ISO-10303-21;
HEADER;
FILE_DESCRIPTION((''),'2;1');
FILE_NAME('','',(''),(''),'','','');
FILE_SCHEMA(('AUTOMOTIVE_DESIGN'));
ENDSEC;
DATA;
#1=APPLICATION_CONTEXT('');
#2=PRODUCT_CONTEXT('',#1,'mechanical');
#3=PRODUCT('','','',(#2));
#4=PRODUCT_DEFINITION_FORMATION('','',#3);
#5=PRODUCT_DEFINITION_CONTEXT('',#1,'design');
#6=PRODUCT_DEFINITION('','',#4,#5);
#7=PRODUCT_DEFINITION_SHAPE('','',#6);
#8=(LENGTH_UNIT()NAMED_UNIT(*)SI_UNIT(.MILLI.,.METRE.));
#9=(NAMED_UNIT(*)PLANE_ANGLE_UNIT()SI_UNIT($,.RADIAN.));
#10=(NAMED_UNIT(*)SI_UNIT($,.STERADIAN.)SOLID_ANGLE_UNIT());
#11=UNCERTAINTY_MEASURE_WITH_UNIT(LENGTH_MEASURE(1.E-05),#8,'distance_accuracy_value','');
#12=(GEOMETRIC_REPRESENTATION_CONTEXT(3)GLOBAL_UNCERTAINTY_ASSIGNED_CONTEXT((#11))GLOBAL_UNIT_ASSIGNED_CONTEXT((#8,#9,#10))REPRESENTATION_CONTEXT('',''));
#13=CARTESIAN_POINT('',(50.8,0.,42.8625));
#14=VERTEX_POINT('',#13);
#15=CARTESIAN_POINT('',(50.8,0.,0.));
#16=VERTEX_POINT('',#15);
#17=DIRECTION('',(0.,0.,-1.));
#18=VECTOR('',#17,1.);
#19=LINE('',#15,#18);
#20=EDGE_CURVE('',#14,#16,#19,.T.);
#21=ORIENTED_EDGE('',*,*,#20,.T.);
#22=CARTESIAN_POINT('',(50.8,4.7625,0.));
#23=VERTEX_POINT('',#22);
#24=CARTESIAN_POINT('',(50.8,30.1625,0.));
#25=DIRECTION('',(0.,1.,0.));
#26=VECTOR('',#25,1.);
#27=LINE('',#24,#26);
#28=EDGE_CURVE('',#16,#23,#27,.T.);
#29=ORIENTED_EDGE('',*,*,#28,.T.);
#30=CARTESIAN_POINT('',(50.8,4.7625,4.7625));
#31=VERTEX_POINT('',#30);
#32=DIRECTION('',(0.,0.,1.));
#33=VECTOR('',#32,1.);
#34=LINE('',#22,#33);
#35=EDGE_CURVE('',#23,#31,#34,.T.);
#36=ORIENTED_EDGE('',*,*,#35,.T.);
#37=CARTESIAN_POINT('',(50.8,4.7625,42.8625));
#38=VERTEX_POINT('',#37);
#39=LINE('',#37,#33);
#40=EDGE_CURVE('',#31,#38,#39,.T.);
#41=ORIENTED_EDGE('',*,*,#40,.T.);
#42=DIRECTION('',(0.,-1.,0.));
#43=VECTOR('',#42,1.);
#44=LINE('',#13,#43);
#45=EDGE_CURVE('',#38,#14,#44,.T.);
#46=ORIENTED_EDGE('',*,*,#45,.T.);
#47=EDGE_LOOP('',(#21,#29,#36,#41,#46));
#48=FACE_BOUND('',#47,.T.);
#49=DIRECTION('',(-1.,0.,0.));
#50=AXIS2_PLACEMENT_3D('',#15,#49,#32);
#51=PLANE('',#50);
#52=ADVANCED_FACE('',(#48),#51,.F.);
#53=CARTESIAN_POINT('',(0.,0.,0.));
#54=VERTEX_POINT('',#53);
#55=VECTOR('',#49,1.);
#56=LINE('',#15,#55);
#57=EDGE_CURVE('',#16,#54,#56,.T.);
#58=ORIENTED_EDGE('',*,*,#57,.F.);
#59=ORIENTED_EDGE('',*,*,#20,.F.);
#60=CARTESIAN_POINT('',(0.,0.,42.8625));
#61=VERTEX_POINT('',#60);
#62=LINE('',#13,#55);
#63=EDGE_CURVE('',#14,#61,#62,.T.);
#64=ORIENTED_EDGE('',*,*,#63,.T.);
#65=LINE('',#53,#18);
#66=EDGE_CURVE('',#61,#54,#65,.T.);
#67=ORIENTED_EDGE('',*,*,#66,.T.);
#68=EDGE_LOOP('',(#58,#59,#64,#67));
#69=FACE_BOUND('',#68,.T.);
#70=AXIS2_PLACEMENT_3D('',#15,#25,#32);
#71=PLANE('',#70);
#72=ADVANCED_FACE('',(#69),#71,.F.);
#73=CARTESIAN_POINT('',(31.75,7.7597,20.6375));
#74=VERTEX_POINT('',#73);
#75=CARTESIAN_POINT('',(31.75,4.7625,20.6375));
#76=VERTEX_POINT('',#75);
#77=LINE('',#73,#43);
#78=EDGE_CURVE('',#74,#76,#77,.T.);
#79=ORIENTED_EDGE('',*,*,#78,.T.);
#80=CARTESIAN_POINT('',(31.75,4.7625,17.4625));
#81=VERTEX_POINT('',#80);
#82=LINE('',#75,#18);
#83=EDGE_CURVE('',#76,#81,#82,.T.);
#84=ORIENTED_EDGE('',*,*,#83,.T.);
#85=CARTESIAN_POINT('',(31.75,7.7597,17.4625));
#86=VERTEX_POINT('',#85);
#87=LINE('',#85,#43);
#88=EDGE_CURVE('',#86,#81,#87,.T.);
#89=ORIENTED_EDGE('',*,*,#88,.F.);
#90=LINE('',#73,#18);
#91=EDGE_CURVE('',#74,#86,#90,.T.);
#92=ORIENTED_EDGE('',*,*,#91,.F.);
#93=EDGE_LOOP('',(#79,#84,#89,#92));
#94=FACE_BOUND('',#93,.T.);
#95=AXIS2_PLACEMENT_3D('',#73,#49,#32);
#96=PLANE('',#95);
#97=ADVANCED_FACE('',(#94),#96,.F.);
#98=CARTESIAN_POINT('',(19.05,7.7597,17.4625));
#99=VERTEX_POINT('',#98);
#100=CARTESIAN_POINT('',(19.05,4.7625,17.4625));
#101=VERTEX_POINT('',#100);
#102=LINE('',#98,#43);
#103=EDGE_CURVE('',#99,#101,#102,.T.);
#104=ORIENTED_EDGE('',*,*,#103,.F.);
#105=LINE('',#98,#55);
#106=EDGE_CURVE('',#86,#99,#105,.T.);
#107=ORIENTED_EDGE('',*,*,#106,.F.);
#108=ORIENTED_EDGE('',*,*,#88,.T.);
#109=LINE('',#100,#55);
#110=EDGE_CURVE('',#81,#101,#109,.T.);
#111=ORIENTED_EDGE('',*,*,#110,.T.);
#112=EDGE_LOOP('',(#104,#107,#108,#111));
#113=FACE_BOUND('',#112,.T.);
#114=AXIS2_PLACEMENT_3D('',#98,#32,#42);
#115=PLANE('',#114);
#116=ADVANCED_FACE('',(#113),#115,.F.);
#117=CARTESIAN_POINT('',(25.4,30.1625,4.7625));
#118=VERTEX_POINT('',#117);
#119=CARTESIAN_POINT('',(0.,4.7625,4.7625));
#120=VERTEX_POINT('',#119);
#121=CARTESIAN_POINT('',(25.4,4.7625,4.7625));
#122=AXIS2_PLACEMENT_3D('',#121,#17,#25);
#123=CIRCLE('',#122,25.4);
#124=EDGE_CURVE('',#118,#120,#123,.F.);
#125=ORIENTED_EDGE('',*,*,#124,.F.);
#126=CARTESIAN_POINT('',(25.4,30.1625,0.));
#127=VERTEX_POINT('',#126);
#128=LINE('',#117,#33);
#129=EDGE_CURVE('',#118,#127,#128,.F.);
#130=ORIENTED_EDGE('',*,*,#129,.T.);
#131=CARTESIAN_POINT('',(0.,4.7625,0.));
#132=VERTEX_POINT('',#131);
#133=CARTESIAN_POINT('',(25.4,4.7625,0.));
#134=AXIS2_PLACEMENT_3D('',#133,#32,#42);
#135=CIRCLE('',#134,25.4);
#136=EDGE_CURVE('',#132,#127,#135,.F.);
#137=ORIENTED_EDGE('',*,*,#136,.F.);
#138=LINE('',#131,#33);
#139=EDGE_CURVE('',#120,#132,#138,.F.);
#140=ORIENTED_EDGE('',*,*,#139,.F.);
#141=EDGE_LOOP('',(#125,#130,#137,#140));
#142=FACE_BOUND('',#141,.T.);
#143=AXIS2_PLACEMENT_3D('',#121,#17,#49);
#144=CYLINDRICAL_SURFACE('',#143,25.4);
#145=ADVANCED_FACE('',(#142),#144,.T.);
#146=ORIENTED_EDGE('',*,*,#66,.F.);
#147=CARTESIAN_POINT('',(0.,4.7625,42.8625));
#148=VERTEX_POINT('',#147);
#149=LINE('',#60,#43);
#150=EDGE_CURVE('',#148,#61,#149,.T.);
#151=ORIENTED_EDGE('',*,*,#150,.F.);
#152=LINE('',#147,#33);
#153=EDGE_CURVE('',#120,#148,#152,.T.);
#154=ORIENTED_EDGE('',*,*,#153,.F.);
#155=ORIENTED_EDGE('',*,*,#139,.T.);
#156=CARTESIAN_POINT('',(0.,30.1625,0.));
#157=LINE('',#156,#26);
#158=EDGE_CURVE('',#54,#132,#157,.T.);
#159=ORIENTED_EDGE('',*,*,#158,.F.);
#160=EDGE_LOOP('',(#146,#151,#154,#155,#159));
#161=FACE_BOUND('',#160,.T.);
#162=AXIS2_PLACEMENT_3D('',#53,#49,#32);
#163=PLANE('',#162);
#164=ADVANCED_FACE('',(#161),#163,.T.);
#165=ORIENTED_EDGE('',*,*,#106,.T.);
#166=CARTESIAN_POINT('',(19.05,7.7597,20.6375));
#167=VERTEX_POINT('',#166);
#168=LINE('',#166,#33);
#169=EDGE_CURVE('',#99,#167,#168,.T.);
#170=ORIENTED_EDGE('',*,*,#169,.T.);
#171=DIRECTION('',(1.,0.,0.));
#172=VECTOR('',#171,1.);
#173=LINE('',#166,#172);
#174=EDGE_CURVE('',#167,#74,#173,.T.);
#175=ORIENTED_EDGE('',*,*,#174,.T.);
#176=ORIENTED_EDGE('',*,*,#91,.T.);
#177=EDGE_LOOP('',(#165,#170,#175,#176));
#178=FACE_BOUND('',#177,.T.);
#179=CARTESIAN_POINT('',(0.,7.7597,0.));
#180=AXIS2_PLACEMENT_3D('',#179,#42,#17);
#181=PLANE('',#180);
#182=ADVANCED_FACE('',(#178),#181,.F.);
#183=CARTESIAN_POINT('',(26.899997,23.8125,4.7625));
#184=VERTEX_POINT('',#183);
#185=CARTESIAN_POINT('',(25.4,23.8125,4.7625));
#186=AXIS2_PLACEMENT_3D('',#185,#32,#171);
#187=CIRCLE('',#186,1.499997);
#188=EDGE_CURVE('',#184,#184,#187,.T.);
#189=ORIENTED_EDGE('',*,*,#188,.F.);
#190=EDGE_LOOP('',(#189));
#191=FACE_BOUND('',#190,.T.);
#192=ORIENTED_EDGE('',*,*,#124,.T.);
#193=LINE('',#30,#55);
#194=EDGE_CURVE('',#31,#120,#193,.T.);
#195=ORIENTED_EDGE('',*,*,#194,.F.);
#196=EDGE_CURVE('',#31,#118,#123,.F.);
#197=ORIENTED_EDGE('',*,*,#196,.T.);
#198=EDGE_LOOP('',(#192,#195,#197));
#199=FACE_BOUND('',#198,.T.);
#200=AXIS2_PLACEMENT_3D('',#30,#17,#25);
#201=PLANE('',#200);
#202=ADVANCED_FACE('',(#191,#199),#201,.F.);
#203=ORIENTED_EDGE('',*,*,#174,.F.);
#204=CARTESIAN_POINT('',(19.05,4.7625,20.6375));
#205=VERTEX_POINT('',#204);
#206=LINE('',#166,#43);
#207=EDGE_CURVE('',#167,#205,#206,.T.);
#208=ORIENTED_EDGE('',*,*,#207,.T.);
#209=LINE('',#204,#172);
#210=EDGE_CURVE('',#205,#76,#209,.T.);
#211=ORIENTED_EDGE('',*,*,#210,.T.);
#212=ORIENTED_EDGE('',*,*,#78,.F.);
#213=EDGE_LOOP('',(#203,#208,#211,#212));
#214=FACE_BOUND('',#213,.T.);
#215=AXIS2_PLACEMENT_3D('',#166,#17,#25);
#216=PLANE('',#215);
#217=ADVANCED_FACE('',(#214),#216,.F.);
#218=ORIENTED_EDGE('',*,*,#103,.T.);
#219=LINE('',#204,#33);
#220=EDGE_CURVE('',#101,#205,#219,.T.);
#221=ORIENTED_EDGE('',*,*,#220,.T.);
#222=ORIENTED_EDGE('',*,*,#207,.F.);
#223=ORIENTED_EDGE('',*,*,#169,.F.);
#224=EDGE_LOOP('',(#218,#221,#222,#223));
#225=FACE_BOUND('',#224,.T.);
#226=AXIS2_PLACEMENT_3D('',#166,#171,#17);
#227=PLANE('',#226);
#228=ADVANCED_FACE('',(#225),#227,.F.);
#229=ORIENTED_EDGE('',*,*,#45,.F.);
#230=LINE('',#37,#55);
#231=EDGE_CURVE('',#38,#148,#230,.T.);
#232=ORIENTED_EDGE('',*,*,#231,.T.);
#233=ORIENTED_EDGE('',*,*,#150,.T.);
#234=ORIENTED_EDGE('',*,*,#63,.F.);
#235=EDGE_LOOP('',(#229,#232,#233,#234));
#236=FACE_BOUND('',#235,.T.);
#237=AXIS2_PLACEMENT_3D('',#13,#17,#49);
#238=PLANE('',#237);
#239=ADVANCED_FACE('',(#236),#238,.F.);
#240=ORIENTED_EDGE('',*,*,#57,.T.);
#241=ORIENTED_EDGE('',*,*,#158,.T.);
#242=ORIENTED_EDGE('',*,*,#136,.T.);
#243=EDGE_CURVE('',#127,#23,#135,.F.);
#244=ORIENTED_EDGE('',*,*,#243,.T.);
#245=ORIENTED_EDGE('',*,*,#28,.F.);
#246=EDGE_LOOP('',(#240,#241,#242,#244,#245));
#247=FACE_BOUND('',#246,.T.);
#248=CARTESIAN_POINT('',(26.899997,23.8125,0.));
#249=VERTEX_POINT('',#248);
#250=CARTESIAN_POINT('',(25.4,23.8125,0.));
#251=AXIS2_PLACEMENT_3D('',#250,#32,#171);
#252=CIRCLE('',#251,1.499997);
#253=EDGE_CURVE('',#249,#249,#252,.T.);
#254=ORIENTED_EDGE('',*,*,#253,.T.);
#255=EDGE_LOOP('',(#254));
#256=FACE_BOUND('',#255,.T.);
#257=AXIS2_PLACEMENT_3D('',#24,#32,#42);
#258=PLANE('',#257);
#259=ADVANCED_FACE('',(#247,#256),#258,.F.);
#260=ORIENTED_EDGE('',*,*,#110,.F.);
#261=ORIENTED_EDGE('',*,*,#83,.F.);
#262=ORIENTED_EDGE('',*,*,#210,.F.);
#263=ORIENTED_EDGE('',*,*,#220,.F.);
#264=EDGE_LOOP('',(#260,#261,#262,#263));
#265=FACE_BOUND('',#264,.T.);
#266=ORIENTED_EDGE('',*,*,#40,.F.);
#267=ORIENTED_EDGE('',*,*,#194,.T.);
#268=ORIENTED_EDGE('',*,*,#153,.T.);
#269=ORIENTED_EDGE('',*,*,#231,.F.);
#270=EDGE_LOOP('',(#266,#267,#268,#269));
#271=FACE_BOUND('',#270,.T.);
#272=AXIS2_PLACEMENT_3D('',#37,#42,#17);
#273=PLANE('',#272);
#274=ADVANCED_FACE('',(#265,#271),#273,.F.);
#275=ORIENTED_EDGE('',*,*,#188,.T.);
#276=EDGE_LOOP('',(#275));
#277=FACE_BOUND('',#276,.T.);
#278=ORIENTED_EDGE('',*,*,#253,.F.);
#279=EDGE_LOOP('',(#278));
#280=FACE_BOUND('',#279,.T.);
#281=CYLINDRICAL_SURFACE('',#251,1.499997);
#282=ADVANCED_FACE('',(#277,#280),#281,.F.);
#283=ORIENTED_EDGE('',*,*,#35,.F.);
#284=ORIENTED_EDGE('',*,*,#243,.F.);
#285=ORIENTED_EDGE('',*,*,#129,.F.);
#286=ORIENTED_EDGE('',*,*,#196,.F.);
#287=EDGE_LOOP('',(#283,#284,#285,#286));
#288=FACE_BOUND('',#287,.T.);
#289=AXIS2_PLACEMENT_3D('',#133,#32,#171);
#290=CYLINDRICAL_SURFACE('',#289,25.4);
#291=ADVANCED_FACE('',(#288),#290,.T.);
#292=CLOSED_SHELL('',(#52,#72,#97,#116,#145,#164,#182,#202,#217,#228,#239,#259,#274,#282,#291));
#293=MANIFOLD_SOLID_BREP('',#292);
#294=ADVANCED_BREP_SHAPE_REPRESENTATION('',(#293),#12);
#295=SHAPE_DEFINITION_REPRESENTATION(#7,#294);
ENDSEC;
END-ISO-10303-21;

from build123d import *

# Parameters (mm, degrees)
BOSS_EXTRUDE1_DEPTH = 50.8
SKETCH2_W           = 12.7
SKETCH2_H           = 3.175
BOSS_EXTRUDE2_DEPTH = 2.9972
SKETCH3_R           = 1.499997
CUT_EXTRUDE1_DEPTH  = 71.299547696
FILLET1_R           = 25.4


with BuildPart() as part:
    # Sketch1 → Boss-Extrude1 (new body)
    with BuildSketch(Plane(origin=(0, 0, 0), x_dir=(0, 0, -1), z_dir=(1, 0, 0))):
        Polygon((0, 0), (-42.8625, 0), (-42.8625, 4.7625), (-4.7625, 4.7625), (-4.7625, 30.1625), (0, 30.1625), align=None)
    extrude(amount=BOSS_EXTRUDE1_DEPTH)

    # Sketch2 → Boss-Extrude2 (add)
    with BuildSketch(Plane(origin=(0, 4.7625, 0), x_dir=(1, 0, 0), z_dir=(0, 1, 0))):
        with Locations((25.4, -19.05)):
            Rectangle(SKETCH2_W, SKETCH2_H)
    extrude(amount=BOSS_EXTRUDE2_DEPTH)

    # Sketch3 → Cut-Extrude1 (cut, through all)
    with BuildSketch(Plane.XY.offset(4.7625)):
        with Locations((25.4, 23.8125)):
            Circle(SKETCH3_R)
    extrude(amount=-CUT_EXTRUDE1_DEPTH, mode=Mode.SUBTRACT)

    # Fillet1
    fillet1_edges = [part.edges().sort_by_distance(p)[0] for p in [
        (0, 30.1625, 2.38125),
        (50.8, 30.1625, 2.38125),
    ]]
    fillet(fillet1_edges, radius=FILLET1_R - 0.0001)  # a hair under: the kernel refuses the full size


solid = part.part
